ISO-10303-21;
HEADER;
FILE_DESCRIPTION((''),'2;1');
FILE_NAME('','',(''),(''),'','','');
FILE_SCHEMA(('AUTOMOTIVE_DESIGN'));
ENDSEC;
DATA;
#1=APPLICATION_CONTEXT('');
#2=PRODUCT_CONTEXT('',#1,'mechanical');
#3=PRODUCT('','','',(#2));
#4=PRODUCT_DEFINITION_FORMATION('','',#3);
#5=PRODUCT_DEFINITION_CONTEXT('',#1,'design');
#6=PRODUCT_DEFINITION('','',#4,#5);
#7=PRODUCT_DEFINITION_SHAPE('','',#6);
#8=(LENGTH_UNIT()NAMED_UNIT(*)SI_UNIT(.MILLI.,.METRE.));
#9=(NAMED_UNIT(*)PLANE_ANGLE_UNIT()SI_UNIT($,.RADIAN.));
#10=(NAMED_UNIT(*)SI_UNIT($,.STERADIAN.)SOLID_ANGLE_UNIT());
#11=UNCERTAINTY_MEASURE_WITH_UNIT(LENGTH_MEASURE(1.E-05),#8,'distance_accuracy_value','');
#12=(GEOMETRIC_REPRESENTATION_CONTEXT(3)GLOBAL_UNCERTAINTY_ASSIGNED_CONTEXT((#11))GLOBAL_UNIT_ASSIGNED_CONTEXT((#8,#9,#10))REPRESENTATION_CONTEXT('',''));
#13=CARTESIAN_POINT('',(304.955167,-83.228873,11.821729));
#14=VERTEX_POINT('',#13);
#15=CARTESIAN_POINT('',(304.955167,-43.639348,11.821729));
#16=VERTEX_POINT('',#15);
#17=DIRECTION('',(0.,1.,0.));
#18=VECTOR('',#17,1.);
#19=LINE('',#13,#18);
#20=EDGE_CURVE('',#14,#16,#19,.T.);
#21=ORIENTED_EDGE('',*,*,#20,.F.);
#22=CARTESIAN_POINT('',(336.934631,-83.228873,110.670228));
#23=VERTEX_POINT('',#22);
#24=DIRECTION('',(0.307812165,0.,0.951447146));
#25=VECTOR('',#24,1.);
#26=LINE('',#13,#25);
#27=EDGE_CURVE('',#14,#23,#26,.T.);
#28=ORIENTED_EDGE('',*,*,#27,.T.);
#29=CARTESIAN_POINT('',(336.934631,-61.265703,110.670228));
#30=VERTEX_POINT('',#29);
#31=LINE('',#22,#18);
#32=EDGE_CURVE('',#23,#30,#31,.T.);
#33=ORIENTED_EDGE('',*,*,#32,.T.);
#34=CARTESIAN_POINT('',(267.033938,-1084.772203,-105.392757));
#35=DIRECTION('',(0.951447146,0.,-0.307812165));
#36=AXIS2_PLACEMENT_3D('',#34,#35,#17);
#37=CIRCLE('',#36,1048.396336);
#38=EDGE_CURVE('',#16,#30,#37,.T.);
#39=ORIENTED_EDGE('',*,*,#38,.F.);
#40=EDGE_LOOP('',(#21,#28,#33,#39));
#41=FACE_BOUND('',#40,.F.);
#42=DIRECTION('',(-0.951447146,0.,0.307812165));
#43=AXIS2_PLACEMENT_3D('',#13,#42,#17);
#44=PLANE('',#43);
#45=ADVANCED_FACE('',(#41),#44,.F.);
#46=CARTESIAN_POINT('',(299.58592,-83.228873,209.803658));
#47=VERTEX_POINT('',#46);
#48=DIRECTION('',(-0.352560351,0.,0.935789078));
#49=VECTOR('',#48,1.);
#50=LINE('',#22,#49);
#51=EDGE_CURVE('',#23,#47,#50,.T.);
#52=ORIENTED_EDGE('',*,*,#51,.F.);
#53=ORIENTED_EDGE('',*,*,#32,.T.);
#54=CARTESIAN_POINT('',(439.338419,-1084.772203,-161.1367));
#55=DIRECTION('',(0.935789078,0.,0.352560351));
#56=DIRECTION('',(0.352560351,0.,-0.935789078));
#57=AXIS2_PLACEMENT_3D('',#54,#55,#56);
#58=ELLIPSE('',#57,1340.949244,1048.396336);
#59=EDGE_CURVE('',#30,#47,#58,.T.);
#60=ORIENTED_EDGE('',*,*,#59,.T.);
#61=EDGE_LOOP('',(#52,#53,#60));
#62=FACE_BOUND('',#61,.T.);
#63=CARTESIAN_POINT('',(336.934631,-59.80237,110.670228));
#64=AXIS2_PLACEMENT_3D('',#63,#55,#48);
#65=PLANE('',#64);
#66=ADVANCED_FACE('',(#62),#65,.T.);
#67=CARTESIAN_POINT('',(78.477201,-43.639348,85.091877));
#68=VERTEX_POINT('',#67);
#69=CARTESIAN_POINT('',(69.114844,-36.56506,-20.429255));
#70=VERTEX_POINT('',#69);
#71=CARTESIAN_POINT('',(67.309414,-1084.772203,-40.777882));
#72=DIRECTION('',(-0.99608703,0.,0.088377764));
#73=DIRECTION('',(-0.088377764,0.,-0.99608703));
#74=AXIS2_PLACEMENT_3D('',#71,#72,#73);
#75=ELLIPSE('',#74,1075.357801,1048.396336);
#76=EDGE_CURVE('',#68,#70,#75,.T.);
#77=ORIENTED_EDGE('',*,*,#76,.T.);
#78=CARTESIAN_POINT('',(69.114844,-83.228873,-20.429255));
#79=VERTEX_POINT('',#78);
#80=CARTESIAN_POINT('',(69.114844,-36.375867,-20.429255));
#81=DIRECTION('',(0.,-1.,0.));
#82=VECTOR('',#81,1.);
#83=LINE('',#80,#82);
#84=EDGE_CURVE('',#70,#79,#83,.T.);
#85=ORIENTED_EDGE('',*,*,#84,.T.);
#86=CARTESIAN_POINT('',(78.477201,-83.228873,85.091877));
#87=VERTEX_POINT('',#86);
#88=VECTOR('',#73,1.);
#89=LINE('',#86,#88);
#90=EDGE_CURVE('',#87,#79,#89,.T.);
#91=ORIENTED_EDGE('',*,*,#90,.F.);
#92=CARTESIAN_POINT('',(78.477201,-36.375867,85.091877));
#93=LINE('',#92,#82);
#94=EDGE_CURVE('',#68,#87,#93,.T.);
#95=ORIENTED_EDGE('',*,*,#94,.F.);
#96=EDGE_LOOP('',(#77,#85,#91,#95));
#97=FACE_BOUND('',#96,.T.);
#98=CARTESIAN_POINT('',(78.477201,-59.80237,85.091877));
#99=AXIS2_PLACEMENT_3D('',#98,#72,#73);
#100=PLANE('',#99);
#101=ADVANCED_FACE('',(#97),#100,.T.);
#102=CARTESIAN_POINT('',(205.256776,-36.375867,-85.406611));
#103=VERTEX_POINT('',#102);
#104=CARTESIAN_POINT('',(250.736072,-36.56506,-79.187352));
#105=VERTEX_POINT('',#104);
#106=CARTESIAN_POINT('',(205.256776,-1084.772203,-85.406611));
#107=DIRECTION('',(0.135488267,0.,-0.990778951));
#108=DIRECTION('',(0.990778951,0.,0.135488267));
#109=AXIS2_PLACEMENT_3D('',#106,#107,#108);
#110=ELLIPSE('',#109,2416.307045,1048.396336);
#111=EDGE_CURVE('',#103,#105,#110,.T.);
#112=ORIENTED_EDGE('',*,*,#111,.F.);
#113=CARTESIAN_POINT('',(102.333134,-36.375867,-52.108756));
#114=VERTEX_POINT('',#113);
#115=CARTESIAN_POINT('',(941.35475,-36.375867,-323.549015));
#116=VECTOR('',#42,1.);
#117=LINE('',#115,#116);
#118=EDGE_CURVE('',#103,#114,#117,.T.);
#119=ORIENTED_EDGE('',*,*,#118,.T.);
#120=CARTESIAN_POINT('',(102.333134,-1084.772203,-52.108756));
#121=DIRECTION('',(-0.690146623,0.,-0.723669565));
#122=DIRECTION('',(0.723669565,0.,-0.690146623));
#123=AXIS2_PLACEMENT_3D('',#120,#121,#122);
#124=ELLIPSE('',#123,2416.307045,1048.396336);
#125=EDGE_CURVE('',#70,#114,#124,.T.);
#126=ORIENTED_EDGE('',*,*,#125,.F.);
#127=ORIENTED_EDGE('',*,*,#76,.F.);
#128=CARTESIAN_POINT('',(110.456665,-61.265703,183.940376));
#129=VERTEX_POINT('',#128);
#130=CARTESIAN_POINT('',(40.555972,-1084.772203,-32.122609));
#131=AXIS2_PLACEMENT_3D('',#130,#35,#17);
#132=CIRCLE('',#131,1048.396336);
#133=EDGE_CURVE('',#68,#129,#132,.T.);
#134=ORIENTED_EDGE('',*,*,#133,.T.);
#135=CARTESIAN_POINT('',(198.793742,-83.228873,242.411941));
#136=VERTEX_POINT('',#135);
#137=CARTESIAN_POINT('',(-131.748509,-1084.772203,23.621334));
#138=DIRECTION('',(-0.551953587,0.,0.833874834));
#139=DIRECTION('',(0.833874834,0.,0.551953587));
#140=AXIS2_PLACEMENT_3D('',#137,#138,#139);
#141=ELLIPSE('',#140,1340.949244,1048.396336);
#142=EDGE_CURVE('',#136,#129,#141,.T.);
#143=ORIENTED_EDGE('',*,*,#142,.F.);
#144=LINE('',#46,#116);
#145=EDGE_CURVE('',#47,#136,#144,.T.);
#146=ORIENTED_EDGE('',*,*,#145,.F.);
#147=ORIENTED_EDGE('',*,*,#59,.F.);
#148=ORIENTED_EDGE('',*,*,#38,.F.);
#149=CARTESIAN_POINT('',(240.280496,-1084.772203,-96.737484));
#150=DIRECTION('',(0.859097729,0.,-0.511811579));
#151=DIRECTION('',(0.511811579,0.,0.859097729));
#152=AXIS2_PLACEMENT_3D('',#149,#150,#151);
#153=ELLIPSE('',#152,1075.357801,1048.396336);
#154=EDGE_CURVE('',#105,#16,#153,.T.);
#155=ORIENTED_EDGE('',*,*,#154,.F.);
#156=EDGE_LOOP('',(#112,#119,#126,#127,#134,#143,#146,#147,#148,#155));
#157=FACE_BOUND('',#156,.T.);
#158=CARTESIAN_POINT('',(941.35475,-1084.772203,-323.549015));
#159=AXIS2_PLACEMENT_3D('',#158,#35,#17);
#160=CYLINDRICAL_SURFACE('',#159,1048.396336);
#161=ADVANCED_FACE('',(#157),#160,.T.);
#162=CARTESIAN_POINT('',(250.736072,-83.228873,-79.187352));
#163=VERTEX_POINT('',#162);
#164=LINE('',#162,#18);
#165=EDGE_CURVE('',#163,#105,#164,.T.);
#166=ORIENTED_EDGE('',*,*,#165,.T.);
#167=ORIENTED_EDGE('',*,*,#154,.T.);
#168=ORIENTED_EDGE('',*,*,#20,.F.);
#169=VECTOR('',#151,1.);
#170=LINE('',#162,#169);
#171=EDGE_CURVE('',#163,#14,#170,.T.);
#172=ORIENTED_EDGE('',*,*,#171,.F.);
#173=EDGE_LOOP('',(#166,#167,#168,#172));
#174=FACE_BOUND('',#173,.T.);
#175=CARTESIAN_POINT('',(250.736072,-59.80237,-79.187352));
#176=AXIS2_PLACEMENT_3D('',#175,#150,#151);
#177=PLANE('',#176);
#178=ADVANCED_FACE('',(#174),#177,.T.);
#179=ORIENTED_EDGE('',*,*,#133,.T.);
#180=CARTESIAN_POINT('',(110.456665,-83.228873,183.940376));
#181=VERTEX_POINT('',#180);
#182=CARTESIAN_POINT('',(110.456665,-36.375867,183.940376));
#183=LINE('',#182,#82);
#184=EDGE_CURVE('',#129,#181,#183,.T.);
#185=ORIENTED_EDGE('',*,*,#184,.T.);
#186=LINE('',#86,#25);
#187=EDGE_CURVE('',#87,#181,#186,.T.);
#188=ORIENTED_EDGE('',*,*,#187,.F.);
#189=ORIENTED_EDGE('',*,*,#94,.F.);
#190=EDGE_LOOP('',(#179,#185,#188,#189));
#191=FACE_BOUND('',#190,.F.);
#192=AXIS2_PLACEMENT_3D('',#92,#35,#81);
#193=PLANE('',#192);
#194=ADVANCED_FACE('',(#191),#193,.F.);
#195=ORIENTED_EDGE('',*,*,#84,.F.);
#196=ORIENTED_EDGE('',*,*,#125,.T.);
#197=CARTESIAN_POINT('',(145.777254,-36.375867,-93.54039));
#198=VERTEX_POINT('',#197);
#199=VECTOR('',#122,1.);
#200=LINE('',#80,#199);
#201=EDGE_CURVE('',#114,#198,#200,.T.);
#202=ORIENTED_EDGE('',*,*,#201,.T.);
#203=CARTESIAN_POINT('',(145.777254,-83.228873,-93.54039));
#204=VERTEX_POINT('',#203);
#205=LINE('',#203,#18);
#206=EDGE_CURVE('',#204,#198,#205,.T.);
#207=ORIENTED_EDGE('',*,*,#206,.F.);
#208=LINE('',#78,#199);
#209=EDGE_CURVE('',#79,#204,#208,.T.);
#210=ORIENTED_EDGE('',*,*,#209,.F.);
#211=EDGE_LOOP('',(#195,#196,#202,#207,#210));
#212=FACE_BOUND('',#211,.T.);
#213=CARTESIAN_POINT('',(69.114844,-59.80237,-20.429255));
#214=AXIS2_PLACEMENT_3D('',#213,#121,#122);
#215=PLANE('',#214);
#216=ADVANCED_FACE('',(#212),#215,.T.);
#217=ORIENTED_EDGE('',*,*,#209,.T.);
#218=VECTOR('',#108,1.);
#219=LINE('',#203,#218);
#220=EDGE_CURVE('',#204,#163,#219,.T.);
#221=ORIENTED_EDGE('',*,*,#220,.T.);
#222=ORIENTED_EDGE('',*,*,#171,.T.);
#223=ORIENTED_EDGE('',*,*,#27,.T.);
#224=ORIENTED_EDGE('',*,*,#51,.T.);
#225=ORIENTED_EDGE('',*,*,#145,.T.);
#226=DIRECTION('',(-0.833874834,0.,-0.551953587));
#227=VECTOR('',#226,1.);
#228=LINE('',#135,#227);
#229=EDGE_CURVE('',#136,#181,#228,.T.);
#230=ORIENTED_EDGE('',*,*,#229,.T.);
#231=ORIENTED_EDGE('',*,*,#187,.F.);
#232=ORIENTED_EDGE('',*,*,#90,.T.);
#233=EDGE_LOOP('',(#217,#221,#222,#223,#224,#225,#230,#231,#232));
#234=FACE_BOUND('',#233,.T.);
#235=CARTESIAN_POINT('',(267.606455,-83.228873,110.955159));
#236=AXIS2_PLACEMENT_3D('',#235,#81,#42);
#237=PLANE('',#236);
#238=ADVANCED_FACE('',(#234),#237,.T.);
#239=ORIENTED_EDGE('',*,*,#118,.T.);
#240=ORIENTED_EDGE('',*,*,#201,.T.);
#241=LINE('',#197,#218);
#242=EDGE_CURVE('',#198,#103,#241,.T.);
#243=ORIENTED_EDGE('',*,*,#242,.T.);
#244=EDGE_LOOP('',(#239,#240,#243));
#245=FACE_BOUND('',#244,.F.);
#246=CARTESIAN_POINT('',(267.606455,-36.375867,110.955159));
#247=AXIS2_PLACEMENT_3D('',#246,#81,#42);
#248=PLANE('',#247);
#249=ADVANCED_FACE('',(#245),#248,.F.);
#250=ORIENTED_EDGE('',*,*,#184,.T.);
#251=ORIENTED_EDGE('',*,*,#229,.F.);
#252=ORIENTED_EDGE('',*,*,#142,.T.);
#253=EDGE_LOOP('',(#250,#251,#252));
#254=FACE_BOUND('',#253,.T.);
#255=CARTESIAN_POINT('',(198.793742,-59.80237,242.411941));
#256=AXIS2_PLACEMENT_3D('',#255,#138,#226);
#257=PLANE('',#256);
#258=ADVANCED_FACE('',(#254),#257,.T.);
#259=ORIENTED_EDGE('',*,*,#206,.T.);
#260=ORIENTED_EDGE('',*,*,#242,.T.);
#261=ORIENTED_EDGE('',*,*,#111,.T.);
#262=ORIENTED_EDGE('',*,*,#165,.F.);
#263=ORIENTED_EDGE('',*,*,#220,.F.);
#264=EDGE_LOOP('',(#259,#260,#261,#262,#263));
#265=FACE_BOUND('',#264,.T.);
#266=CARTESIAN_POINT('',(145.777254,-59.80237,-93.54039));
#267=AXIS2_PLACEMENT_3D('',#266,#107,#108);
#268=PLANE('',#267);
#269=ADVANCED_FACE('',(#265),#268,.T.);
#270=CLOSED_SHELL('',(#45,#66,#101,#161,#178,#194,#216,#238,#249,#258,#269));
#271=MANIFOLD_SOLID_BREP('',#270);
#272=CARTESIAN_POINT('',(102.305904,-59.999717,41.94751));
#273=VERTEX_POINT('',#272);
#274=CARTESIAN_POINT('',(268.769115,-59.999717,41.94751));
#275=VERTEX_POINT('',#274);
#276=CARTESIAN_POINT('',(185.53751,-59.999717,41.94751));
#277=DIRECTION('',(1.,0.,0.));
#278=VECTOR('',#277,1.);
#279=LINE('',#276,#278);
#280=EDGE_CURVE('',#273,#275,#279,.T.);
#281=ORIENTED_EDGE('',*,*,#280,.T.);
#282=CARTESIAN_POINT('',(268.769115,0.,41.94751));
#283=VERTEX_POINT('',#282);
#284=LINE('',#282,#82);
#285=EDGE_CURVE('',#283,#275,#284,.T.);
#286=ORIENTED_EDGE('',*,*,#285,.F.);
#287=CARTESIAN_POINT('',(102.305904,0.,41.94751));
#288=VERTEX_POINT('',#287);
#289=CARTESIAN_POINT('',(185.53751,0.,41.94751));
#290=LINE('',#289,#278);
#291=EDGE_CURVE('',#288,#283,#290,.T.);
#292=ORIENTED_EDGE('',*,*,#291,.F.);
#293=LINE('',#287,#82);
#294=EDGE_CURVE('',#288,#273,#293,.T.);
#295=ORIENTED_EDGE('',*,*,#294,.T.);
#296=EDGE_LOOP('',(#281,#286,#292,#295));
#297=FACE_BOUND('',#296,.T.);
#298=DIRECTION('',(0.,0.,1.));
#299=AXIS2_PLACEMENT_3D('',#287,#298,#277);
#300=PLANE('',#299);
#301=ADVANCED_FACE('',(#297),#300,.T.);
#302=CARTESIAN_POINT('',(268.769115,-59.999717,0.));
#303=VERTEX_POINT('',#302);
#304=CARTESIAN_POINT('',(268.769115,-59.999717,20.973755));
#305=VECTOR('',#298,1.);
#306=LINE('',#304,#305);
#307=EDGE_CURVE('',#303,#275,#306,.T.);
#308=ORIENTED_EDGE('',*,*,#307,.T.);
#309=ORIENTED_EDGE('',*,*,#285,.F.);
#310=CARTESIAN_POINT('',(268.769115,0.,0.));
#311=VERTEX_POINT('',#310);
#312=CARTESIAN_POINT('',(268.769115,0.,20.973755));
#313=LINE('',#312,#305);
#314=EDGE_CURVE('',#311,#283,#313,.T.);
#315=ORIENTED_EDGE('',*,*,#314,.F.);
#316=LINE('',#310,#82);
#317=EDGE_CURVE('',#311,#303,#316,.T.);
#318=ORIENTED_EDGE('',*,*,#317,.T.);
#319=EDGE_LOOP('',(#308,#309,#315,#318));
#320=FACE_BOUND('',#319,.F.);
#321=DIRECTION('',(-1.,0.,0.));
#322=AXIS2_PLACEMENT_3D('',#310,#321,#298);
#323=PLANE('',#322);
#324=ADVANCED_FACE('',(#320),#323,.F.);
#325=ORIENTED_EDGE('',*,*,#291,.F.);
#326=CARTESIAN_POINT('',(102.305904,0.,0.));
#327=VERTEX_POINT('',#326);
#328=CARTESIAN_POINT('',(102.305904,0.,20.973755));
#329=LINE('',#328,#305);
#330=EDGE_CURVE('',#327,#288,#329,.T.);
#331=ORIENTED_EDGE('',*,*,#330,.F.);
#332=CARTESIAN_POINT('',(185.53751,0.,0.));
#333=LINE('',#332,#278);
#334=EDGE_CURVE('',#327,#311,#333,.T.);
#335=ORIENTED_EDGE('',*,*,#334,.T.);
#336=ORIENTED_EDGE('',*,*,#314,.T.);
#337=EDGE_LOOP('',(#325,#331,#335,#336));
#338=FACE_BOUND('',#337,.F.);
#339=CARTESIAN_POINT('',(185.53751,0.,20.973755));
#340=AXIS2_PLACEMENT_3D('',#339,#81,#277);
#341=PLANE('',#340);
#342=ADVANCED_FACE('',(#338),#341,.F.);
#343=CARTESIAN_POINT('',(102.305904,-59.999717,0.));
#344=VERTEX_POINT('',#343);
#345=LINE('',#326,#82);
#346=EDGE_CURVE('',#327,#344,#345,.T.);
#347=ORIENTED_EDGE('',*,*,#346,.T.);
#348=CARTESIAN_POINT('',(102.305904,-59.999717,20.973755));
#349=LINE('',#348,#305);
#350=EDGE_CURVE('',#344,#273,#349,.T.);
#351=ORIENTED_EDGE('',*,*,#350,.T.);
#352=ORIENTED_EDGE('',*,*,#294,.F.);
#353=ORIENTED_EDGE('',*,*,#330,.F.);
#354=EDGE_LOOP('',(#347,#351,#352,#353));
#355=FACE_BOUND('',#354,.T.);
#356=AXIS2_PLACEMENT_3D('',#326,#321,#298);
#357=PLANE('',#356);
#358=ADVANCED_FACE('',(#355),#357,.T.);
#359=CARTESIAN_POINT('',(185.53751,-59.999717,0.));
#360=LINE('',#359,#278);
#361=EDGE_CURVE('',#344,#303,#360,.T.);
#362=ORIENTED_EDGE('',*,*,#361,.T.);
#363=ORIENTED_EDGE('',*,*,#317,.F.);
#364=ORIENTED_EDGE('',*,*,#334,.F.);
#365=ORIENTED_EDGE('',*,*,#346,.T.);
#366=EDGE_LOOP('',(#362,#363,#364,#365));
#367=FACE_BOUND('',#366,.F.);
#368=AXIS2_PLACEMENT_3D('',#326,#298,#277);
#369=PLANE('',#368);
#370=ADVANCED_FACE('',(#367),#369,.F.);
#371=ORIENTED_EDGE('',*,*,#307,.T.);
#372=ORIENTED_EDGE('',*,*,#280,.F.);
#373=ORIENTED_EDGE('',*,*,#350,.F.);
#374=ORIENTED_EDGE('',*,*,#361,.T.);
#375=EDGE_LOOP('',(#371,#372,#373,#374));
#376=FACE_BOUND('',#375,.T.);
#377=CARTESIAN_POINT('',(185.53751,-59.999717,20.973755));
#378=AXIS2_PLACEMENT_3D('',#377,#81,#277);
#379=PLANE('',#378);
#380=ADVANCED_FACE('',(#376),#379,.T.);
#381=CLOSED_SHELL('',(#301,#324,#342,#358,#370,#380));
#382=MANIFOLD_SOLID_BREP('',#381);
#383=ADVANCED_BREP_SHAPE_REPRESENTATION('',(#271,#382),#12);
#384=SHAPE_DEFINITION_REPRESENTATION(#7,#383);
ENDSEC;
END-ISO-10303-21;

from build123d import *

# Parameters (mm, degrees)
F0_W        = 166.4632111788
F0_H        = 41.9475100935
F2_DEPTH    = 59.9997173995
F4_DEPTH    = 23.426502943
F5_DEPTH    = 103.8927901536
F6_T1_DEPTH = 1655.4987810503


# Not quite as in the source:
# - a fillet or chamfer that OpenCascade refuses, or shapes differently, is made with other operations: its cross-section is extruded or revolved along the edge and cut away or added


with BuildPart() as f2:
    # F0 (on Front) → F2 (new body)
    with BuildSketch(Plane.XZ):
        with Locations((185.5375096202, 20.9737550467)):
            Rectangle(F0_W, F0_H)
    extrude(amount=F2_DEPTH)


with BuildPart() as f4:
    # F3 (on offset) → F4 (new body, symmetric)
    with BuildSketch(Plane.XZ.offset(59.8023701459)):
        Polygon((304.9551667814, 11.8217294328), (267.6064548846, 110.9551588781), (166.814277799, 143.5634423701), (78.4772006558, 85.0918773514), (69.1148442917, -20.4292551163), (145.7772540063, -93.5403900459), (250.7360716562, -79.1873516402), align=None)
    extrude(amount=F4_DEPTH, both=True)

    # F5 (add): faces of the model
    f5_faces = [f4.faces().sort_by_distance(p)[0] for p in [
        (217.2103663418, -59.8023701459, 127.2593006241),
        (122.6457392274, -59.8023701459, 114.3276598607),
        (73.7960224737, -59.8023701459, 32.3313111175),
        (107.446049149, -59.8023701459, -56.9848225811),
        (198.2566628312, -59.8023701459, -86.3638708431),
        (277.8456192188, -59.8023701459, -33.6828111037),
        (286.280810833, -59.8023701459, 61.3884441555),
    ]]
    extrude(f5_faces, amount=F5_DEPTH, dir=(0.3078121651, 0, 0.9514471457))

    # F6: fillet of radius 1048.3963355256 on 3 edges, made by hand

    # F6_s2 → F6_t1 (cut)
    with BuildSketch(Plane(origin=(946.9197916988, 0, -306.3474756142), x_dir=(0, 1, 0), z_dir=(-0.9514471457, 0, 0.3078121651))):
        with BuildLine():
            ThreePointArc((-36.3758672029, 18.0793434638), (-48.1552934974, -138.6377897402), (-83.228873089, -291.833281639))
            Line((-83.228873089, -291.833281639), (-36.3758672029, -291.833281639))
            Line((-36.3758672029, -291.833281639), (-36.3758672029, 18.0793434638))
        make_face()
    extrude(amount=F6_T1_DEPTH, mode=Mode.SUBTRACT)


solid = Compound([f2.part, f4.part])
